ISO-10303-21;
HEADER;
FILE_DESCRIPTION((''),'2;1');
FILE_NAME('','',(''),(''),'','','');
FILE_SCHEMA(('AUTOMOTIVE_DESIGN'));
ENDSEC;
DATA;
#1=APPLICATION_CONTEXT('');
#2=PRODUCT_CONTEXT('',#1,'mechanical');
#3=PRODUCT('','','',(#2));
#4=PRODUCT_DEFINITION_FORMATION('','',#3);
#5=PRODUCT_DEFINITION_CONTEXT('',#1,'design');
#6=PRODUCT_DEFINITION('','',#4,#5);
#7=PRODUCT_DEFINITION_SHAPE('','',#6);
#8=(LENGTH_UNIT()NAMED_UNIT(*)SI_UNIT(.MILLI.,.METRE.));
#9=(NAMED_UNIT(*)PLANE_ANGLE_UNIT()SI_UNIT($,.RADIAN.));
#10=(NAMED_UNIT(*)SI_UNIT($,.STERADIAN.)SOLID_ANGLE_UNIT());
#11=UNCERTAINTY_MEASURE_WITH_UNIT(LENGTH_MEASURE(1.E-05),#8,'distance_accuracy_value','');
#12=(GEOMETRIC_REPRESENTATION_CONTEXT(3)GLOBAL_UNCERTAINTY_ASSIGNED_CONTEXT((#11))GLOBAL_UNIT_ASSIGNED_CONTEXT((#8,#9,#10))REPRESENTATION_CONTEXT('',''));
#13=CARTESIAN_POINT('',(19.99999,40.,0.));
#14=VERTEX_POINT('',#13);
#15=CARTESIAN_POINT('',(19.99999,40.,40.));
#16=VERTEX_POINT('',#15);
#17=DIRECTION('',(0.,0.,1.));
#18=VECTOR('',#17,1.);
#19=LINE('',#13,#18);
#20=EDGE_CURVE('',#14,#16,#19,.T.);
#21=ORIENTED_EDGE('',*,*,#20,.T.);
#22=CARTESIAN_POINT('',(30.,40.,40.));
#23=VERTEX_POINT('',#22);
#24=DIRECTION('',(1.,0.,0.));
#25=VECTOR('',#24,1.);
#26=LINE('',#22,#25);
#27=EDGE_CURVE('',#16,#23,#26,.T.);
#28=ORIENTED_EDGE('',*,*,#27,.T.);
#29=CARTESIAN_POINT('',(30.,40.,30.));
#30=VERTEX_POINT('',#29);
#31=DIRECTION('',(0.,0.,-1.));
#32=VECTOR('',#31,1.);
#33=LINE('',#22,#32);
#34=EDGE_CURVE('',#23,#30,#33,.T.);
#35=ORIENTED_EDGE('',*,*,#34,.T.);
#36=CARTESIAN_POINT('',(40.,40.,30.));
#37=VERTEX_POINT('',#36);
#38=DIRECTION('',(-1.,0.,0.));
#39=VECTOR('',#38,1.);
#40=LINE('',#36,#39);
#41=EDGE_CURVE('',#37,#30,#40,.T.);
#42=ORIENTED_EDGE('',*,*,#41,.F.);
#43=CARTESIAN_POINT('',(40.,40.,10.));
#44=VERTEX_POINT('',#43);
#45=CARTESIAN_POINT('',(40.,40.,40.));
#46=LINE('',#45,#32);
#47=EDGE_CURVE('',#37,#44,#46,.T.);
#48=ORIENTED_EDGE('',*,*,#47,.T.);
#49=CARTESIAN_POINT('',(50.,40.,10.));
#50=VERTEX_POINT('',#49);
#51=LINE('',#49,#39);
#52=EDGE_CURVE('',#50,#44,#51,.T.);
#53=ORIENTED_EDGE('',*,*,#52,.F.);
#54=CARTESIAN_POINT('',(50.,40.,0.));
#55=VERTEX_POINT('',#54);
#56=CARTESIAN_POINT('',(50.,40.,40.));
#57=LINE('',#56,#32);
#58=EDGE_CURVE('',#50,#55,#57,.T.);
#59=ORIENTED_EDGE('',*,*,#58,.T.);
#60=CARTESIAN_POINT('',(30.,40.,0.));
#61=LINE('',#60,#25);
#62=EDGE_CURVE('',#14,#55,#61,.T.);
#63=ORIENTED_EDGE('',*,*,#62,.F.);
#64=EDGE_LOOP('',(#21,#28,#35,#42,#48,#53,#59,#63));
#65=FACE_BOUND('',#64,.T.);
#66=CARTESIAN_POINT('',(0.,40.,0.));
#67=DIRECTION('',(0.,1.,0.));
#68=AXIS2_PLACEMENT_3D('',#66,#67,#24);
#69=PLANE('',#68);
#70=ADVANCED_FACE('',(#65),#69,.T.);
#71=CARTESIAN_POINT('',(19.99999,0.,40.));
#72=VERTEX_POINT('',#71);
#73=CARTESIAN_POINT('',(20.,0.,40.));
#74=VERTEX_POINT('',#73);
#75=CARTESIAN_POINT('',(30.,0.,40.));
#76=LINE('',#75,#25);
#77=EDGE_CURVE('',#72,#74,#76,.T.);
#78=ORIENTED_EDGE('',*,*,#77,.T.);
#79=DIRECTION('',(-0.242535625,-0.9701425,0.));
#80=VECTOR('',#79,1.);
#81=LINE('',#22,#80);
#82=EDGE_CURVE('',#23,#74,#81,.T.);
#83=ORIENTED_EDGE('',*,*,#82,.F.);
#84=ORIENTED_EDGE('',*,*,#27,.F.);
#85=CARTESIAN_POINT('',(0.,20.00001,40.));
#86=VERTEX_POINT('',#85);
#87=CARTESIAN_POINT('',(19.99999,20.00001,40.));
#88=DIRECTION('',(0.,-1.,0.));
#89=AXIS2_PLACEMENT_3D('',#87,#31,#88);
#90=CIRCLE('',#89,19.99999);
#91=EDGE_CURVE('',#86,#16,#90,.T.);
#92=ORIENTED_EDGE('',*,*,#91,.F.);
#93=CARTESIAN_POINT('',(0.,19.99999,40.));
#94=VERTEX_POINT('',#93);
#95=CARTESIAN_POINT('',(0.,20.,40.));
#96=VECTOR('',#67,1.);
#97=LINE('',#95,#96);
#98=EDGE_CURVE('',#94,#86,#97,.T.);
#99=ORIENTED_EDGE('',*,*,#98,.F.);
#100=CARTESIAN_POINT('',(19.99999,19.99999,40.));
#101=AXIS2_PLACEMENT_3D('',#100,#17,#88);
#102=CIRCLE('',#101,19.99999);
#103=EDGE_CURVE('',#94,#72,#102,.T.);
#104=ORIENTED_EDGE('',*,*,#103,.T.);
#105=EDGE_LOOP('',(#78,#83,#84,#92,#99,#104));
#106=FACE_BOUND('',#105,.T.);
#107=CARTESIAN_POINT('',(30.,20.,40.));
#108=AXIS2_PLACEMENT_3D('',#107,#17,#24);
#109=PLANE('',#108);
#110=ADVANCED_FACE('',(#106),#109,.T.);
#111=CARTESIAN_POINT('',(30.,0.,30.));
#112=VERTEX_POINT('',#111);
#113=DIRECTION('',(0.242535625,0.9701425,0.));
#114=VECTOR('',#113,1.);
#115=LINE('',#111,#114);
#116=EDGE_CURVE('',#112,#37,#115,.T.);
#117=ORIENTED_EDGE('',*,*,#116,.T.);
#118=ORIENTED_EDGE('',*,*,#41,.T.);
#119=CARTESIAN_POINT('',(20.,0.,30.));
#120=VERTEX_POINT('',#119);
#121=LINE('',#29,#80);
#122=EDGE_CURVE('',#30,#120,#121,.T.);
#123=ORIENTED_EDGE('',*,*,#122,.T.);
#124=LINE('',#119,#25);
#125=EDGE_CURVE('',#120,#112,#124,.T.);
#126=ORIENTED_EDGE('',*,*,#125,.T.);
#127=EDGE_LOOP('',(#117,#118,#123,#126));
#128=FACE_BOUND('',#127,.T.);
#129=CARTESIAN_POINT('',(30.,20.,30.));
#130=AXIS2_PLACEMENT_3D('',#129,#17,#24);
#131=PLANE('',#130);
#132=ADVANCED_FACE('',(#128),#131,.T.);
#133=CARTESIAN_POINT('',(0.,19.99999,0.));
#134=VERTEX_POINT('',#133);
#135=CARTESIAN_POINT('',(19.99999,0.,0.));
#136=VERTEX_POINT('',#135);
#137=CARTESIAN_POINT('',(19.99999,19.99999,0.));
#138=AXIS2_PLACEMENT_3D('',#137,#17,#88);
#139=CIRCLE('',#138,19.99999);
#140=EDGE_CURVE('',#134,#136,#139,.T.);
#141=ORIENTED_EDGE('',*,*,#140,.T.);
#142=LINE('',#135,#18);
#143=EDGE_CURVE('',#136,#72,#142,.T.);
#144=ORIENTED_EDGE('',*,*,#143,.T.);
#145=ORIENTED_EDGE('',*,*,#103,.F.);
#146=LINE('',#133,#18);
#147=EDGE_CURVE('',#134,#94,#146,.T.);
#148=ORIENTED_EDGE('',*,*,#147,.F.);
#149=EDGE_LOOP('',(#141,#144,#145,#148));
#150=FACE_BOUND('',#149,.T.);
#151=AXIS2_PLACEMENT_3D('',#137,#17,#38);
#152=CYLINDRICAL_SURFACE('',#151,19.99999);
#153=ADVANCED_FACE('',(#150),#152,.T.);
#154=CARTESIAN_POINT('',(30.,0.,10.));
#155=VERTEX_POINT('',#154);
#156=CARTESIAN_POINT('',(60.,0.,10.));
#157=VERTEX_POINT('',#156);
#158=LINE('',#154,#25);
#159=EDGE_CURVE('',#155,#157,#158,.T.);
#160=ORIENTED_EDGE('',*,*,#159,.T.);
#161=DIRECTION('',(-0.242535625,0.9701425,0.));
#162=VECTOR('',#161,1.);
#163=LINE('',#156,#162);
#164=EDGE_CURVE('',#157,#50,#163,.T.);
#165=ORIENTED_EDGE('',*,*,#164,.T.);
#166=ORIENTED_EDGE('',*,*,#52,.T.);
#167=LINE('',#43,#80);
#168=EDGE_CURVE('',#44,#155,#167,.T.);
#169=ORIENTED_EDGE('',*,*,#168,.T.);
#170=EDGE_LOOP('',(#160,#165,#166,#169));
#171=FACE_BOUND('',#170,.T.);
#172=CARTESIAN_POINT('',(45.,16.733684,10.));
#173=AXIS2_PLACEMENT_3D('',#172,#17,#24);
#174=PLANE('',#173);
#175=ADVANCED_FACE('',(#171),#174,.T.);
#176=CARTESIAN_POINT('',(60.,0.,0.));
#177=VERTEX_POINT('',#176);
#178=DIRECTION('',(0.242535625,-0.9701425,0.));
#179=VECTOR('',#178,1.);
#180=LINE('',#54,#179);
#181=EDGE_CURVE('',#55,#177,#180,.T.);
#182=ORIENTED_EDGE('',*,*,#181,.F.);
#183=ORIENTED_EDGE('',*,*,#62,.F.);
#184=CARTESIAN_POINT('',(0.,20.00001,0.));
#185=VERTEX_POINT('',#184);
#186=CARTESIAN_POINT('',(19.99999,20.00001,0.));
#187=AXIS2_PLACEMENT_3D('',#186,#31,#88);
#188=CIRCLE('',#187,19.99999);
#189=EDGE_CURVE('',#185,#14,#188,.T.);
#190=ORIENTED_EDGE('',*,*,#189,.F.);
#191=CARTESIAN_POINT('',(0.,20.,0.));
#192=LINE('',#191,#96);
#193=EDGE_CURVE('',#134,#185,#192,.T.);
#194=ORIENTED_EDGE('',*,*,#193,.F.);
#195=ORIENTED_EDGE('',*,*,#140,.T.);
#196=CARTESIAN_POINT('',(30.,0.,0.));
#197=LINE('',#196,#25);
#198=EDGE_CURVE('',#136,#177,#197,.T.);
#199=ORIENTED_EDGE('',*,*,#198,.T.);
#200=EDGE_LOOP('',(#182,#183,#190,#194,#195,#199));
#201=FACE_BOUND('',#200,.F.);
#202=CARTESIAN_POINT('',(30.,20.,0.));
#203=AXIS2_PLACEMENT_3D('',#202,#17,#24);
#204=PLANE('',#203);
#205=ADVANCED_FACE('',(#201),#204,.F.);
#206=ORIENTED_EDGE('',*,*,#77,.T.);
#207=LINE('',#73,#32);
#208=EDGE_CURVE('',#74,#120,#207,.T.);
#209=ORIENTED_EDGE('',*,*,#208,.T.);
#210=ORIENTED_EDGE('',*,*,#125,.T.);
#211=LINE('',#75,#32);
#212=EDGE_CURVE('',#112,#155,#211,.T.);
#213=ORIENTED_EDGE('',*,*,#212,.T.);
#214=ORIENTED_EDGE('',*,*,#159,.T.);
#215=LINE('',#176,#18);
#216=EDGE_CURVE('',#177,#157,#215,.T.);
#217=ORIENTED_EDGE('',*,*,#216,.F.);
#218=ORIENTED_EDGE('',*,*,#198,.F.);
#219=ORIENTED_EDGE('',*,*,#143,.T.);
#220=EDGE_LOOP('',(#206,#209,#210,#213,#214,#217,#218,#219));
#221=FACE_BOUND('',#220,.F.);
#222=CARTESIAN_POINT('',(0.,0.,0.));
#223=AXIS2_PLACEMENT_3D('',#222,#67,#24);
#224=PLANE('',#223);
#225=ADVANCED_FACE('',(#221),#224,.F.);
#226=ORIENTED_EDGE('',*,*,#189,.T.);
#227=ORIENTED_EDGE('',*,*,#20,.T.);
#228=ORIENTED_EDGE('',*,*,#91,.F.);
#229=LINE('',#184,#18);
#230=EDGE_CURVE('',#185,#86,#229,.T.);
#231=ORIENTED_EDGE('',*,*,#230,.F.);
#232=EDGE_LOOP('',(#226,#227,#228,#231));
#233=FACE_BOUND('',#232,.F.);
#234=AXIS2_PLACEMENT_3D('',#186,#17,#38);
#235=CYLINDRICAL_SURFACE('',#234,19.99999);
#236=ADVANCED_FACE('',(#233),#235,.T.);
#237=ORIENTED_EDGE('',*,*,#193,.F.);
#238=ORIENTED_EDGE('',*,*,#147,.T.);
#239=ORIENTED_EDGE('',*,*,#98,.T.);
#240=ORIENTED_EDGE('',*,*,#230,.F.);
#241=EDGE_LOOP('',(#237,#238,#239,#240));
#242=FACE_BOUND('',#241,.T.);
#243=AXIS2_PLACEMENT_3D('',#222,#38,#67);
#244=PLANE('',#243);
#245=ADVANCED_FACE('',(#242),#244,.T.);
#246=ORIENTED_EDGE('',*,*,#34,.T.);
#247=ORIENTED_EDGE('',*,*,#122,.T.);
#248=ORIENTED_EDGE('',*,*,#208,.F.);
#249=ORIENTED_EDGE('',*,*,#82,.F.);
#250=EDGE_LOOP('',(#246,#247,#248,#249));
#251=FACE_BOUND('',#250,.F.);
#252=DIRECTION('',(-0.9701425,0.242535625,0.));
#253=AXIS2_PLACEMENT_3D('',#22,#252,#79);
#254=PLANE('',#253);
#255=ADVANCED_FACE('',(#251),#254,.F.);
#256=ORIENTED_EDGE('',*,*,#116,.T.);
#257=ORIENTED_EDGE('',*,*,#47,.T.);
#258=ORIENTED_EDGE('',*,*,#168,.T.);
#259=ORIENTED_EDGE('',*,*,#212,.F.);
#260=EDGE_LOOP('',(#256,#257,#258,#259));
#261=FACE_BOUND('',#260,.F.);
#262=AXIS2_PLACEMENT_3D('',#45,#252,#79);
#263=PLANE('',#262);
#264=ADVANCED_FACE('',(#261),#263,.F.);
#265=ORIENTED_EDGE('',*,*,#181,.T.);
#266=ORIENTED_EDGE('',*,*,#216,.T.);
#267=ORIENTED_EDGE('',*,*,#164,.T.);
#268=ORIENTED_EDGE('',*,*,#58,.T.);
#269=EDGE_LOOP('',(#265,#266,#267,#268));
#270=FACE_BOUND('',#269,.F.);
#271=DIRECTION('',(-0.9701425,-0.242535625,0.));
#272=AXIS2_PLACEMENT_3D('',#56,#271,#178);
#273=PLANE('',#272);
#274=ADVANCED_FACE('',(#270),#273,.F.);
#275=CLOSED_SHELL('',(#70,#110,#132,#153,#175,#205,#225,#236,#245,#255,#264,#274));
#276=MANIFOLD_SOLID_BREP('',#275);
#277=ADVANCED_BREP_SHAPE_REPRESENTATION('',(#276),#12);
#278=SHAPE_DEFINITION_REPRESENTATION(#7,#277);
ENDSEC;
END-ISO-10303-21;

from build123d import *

# Parameters (mm, degrees)
F0_W     = 60
F0_H     = 40
F1_DEPTH = 40
F2_R     = 19.99999
F4_DEPTH = 40
F6_DEPTH = 30
F8_DEPTH = 10


# Not quite as in the source:
# - a fillet or chamfer is up to 0.001 mm smaller than in the source, because OpenCascade refuses the exact size


with BuildPart() as f1:
    # F0 (on Top) → F1 (new body)
    with BuildSketch(Plane.XY):
        with Locations((30, 20)):
            Rectangle(F0_W, F0_H)
    extrude(amount=F1_DEPTH)

    # F2 (radius 20 in the source; OpenCascade refuses exactly that, so slightly less here)
    f2_edges = [f1.edges().sort_by_distance(p)[0] for p in [
        (0, 40, 20),
        (0, 0, 20),
    ]]
    fillet(f2_edges, radius=F2_R)

    # F3 (on face) → F4 (cut)
    with BuildSketch(Plane.XY.offset(40)):
        Polygon((60, 0), (60, 40), (50, 40), align=None)
    extrude(amount=-F4_DEPTH, mode=Mode.SUBTRACT)

    # F5 (on face) → F6 (cut)
    with BuildSketch(Plane.XY.offset(40)):
        Polygon((60, 0), (50, 40), (40, 40), (30, 0), align=None)
    extrude(amount=-F6_DEPTH, mode=Mode.SUBTRACT)

    # F7 (on face) → F8 (cut)
    with BuildSketch(Plane.XY.offset(40)):
        Polygon((30, 0), (40, 40), (30, 40), (20, 0), align=None)
    extrude(amount=-F8_DEPTH, mode=Mode.SUBTRACT)


solid = f1.part
